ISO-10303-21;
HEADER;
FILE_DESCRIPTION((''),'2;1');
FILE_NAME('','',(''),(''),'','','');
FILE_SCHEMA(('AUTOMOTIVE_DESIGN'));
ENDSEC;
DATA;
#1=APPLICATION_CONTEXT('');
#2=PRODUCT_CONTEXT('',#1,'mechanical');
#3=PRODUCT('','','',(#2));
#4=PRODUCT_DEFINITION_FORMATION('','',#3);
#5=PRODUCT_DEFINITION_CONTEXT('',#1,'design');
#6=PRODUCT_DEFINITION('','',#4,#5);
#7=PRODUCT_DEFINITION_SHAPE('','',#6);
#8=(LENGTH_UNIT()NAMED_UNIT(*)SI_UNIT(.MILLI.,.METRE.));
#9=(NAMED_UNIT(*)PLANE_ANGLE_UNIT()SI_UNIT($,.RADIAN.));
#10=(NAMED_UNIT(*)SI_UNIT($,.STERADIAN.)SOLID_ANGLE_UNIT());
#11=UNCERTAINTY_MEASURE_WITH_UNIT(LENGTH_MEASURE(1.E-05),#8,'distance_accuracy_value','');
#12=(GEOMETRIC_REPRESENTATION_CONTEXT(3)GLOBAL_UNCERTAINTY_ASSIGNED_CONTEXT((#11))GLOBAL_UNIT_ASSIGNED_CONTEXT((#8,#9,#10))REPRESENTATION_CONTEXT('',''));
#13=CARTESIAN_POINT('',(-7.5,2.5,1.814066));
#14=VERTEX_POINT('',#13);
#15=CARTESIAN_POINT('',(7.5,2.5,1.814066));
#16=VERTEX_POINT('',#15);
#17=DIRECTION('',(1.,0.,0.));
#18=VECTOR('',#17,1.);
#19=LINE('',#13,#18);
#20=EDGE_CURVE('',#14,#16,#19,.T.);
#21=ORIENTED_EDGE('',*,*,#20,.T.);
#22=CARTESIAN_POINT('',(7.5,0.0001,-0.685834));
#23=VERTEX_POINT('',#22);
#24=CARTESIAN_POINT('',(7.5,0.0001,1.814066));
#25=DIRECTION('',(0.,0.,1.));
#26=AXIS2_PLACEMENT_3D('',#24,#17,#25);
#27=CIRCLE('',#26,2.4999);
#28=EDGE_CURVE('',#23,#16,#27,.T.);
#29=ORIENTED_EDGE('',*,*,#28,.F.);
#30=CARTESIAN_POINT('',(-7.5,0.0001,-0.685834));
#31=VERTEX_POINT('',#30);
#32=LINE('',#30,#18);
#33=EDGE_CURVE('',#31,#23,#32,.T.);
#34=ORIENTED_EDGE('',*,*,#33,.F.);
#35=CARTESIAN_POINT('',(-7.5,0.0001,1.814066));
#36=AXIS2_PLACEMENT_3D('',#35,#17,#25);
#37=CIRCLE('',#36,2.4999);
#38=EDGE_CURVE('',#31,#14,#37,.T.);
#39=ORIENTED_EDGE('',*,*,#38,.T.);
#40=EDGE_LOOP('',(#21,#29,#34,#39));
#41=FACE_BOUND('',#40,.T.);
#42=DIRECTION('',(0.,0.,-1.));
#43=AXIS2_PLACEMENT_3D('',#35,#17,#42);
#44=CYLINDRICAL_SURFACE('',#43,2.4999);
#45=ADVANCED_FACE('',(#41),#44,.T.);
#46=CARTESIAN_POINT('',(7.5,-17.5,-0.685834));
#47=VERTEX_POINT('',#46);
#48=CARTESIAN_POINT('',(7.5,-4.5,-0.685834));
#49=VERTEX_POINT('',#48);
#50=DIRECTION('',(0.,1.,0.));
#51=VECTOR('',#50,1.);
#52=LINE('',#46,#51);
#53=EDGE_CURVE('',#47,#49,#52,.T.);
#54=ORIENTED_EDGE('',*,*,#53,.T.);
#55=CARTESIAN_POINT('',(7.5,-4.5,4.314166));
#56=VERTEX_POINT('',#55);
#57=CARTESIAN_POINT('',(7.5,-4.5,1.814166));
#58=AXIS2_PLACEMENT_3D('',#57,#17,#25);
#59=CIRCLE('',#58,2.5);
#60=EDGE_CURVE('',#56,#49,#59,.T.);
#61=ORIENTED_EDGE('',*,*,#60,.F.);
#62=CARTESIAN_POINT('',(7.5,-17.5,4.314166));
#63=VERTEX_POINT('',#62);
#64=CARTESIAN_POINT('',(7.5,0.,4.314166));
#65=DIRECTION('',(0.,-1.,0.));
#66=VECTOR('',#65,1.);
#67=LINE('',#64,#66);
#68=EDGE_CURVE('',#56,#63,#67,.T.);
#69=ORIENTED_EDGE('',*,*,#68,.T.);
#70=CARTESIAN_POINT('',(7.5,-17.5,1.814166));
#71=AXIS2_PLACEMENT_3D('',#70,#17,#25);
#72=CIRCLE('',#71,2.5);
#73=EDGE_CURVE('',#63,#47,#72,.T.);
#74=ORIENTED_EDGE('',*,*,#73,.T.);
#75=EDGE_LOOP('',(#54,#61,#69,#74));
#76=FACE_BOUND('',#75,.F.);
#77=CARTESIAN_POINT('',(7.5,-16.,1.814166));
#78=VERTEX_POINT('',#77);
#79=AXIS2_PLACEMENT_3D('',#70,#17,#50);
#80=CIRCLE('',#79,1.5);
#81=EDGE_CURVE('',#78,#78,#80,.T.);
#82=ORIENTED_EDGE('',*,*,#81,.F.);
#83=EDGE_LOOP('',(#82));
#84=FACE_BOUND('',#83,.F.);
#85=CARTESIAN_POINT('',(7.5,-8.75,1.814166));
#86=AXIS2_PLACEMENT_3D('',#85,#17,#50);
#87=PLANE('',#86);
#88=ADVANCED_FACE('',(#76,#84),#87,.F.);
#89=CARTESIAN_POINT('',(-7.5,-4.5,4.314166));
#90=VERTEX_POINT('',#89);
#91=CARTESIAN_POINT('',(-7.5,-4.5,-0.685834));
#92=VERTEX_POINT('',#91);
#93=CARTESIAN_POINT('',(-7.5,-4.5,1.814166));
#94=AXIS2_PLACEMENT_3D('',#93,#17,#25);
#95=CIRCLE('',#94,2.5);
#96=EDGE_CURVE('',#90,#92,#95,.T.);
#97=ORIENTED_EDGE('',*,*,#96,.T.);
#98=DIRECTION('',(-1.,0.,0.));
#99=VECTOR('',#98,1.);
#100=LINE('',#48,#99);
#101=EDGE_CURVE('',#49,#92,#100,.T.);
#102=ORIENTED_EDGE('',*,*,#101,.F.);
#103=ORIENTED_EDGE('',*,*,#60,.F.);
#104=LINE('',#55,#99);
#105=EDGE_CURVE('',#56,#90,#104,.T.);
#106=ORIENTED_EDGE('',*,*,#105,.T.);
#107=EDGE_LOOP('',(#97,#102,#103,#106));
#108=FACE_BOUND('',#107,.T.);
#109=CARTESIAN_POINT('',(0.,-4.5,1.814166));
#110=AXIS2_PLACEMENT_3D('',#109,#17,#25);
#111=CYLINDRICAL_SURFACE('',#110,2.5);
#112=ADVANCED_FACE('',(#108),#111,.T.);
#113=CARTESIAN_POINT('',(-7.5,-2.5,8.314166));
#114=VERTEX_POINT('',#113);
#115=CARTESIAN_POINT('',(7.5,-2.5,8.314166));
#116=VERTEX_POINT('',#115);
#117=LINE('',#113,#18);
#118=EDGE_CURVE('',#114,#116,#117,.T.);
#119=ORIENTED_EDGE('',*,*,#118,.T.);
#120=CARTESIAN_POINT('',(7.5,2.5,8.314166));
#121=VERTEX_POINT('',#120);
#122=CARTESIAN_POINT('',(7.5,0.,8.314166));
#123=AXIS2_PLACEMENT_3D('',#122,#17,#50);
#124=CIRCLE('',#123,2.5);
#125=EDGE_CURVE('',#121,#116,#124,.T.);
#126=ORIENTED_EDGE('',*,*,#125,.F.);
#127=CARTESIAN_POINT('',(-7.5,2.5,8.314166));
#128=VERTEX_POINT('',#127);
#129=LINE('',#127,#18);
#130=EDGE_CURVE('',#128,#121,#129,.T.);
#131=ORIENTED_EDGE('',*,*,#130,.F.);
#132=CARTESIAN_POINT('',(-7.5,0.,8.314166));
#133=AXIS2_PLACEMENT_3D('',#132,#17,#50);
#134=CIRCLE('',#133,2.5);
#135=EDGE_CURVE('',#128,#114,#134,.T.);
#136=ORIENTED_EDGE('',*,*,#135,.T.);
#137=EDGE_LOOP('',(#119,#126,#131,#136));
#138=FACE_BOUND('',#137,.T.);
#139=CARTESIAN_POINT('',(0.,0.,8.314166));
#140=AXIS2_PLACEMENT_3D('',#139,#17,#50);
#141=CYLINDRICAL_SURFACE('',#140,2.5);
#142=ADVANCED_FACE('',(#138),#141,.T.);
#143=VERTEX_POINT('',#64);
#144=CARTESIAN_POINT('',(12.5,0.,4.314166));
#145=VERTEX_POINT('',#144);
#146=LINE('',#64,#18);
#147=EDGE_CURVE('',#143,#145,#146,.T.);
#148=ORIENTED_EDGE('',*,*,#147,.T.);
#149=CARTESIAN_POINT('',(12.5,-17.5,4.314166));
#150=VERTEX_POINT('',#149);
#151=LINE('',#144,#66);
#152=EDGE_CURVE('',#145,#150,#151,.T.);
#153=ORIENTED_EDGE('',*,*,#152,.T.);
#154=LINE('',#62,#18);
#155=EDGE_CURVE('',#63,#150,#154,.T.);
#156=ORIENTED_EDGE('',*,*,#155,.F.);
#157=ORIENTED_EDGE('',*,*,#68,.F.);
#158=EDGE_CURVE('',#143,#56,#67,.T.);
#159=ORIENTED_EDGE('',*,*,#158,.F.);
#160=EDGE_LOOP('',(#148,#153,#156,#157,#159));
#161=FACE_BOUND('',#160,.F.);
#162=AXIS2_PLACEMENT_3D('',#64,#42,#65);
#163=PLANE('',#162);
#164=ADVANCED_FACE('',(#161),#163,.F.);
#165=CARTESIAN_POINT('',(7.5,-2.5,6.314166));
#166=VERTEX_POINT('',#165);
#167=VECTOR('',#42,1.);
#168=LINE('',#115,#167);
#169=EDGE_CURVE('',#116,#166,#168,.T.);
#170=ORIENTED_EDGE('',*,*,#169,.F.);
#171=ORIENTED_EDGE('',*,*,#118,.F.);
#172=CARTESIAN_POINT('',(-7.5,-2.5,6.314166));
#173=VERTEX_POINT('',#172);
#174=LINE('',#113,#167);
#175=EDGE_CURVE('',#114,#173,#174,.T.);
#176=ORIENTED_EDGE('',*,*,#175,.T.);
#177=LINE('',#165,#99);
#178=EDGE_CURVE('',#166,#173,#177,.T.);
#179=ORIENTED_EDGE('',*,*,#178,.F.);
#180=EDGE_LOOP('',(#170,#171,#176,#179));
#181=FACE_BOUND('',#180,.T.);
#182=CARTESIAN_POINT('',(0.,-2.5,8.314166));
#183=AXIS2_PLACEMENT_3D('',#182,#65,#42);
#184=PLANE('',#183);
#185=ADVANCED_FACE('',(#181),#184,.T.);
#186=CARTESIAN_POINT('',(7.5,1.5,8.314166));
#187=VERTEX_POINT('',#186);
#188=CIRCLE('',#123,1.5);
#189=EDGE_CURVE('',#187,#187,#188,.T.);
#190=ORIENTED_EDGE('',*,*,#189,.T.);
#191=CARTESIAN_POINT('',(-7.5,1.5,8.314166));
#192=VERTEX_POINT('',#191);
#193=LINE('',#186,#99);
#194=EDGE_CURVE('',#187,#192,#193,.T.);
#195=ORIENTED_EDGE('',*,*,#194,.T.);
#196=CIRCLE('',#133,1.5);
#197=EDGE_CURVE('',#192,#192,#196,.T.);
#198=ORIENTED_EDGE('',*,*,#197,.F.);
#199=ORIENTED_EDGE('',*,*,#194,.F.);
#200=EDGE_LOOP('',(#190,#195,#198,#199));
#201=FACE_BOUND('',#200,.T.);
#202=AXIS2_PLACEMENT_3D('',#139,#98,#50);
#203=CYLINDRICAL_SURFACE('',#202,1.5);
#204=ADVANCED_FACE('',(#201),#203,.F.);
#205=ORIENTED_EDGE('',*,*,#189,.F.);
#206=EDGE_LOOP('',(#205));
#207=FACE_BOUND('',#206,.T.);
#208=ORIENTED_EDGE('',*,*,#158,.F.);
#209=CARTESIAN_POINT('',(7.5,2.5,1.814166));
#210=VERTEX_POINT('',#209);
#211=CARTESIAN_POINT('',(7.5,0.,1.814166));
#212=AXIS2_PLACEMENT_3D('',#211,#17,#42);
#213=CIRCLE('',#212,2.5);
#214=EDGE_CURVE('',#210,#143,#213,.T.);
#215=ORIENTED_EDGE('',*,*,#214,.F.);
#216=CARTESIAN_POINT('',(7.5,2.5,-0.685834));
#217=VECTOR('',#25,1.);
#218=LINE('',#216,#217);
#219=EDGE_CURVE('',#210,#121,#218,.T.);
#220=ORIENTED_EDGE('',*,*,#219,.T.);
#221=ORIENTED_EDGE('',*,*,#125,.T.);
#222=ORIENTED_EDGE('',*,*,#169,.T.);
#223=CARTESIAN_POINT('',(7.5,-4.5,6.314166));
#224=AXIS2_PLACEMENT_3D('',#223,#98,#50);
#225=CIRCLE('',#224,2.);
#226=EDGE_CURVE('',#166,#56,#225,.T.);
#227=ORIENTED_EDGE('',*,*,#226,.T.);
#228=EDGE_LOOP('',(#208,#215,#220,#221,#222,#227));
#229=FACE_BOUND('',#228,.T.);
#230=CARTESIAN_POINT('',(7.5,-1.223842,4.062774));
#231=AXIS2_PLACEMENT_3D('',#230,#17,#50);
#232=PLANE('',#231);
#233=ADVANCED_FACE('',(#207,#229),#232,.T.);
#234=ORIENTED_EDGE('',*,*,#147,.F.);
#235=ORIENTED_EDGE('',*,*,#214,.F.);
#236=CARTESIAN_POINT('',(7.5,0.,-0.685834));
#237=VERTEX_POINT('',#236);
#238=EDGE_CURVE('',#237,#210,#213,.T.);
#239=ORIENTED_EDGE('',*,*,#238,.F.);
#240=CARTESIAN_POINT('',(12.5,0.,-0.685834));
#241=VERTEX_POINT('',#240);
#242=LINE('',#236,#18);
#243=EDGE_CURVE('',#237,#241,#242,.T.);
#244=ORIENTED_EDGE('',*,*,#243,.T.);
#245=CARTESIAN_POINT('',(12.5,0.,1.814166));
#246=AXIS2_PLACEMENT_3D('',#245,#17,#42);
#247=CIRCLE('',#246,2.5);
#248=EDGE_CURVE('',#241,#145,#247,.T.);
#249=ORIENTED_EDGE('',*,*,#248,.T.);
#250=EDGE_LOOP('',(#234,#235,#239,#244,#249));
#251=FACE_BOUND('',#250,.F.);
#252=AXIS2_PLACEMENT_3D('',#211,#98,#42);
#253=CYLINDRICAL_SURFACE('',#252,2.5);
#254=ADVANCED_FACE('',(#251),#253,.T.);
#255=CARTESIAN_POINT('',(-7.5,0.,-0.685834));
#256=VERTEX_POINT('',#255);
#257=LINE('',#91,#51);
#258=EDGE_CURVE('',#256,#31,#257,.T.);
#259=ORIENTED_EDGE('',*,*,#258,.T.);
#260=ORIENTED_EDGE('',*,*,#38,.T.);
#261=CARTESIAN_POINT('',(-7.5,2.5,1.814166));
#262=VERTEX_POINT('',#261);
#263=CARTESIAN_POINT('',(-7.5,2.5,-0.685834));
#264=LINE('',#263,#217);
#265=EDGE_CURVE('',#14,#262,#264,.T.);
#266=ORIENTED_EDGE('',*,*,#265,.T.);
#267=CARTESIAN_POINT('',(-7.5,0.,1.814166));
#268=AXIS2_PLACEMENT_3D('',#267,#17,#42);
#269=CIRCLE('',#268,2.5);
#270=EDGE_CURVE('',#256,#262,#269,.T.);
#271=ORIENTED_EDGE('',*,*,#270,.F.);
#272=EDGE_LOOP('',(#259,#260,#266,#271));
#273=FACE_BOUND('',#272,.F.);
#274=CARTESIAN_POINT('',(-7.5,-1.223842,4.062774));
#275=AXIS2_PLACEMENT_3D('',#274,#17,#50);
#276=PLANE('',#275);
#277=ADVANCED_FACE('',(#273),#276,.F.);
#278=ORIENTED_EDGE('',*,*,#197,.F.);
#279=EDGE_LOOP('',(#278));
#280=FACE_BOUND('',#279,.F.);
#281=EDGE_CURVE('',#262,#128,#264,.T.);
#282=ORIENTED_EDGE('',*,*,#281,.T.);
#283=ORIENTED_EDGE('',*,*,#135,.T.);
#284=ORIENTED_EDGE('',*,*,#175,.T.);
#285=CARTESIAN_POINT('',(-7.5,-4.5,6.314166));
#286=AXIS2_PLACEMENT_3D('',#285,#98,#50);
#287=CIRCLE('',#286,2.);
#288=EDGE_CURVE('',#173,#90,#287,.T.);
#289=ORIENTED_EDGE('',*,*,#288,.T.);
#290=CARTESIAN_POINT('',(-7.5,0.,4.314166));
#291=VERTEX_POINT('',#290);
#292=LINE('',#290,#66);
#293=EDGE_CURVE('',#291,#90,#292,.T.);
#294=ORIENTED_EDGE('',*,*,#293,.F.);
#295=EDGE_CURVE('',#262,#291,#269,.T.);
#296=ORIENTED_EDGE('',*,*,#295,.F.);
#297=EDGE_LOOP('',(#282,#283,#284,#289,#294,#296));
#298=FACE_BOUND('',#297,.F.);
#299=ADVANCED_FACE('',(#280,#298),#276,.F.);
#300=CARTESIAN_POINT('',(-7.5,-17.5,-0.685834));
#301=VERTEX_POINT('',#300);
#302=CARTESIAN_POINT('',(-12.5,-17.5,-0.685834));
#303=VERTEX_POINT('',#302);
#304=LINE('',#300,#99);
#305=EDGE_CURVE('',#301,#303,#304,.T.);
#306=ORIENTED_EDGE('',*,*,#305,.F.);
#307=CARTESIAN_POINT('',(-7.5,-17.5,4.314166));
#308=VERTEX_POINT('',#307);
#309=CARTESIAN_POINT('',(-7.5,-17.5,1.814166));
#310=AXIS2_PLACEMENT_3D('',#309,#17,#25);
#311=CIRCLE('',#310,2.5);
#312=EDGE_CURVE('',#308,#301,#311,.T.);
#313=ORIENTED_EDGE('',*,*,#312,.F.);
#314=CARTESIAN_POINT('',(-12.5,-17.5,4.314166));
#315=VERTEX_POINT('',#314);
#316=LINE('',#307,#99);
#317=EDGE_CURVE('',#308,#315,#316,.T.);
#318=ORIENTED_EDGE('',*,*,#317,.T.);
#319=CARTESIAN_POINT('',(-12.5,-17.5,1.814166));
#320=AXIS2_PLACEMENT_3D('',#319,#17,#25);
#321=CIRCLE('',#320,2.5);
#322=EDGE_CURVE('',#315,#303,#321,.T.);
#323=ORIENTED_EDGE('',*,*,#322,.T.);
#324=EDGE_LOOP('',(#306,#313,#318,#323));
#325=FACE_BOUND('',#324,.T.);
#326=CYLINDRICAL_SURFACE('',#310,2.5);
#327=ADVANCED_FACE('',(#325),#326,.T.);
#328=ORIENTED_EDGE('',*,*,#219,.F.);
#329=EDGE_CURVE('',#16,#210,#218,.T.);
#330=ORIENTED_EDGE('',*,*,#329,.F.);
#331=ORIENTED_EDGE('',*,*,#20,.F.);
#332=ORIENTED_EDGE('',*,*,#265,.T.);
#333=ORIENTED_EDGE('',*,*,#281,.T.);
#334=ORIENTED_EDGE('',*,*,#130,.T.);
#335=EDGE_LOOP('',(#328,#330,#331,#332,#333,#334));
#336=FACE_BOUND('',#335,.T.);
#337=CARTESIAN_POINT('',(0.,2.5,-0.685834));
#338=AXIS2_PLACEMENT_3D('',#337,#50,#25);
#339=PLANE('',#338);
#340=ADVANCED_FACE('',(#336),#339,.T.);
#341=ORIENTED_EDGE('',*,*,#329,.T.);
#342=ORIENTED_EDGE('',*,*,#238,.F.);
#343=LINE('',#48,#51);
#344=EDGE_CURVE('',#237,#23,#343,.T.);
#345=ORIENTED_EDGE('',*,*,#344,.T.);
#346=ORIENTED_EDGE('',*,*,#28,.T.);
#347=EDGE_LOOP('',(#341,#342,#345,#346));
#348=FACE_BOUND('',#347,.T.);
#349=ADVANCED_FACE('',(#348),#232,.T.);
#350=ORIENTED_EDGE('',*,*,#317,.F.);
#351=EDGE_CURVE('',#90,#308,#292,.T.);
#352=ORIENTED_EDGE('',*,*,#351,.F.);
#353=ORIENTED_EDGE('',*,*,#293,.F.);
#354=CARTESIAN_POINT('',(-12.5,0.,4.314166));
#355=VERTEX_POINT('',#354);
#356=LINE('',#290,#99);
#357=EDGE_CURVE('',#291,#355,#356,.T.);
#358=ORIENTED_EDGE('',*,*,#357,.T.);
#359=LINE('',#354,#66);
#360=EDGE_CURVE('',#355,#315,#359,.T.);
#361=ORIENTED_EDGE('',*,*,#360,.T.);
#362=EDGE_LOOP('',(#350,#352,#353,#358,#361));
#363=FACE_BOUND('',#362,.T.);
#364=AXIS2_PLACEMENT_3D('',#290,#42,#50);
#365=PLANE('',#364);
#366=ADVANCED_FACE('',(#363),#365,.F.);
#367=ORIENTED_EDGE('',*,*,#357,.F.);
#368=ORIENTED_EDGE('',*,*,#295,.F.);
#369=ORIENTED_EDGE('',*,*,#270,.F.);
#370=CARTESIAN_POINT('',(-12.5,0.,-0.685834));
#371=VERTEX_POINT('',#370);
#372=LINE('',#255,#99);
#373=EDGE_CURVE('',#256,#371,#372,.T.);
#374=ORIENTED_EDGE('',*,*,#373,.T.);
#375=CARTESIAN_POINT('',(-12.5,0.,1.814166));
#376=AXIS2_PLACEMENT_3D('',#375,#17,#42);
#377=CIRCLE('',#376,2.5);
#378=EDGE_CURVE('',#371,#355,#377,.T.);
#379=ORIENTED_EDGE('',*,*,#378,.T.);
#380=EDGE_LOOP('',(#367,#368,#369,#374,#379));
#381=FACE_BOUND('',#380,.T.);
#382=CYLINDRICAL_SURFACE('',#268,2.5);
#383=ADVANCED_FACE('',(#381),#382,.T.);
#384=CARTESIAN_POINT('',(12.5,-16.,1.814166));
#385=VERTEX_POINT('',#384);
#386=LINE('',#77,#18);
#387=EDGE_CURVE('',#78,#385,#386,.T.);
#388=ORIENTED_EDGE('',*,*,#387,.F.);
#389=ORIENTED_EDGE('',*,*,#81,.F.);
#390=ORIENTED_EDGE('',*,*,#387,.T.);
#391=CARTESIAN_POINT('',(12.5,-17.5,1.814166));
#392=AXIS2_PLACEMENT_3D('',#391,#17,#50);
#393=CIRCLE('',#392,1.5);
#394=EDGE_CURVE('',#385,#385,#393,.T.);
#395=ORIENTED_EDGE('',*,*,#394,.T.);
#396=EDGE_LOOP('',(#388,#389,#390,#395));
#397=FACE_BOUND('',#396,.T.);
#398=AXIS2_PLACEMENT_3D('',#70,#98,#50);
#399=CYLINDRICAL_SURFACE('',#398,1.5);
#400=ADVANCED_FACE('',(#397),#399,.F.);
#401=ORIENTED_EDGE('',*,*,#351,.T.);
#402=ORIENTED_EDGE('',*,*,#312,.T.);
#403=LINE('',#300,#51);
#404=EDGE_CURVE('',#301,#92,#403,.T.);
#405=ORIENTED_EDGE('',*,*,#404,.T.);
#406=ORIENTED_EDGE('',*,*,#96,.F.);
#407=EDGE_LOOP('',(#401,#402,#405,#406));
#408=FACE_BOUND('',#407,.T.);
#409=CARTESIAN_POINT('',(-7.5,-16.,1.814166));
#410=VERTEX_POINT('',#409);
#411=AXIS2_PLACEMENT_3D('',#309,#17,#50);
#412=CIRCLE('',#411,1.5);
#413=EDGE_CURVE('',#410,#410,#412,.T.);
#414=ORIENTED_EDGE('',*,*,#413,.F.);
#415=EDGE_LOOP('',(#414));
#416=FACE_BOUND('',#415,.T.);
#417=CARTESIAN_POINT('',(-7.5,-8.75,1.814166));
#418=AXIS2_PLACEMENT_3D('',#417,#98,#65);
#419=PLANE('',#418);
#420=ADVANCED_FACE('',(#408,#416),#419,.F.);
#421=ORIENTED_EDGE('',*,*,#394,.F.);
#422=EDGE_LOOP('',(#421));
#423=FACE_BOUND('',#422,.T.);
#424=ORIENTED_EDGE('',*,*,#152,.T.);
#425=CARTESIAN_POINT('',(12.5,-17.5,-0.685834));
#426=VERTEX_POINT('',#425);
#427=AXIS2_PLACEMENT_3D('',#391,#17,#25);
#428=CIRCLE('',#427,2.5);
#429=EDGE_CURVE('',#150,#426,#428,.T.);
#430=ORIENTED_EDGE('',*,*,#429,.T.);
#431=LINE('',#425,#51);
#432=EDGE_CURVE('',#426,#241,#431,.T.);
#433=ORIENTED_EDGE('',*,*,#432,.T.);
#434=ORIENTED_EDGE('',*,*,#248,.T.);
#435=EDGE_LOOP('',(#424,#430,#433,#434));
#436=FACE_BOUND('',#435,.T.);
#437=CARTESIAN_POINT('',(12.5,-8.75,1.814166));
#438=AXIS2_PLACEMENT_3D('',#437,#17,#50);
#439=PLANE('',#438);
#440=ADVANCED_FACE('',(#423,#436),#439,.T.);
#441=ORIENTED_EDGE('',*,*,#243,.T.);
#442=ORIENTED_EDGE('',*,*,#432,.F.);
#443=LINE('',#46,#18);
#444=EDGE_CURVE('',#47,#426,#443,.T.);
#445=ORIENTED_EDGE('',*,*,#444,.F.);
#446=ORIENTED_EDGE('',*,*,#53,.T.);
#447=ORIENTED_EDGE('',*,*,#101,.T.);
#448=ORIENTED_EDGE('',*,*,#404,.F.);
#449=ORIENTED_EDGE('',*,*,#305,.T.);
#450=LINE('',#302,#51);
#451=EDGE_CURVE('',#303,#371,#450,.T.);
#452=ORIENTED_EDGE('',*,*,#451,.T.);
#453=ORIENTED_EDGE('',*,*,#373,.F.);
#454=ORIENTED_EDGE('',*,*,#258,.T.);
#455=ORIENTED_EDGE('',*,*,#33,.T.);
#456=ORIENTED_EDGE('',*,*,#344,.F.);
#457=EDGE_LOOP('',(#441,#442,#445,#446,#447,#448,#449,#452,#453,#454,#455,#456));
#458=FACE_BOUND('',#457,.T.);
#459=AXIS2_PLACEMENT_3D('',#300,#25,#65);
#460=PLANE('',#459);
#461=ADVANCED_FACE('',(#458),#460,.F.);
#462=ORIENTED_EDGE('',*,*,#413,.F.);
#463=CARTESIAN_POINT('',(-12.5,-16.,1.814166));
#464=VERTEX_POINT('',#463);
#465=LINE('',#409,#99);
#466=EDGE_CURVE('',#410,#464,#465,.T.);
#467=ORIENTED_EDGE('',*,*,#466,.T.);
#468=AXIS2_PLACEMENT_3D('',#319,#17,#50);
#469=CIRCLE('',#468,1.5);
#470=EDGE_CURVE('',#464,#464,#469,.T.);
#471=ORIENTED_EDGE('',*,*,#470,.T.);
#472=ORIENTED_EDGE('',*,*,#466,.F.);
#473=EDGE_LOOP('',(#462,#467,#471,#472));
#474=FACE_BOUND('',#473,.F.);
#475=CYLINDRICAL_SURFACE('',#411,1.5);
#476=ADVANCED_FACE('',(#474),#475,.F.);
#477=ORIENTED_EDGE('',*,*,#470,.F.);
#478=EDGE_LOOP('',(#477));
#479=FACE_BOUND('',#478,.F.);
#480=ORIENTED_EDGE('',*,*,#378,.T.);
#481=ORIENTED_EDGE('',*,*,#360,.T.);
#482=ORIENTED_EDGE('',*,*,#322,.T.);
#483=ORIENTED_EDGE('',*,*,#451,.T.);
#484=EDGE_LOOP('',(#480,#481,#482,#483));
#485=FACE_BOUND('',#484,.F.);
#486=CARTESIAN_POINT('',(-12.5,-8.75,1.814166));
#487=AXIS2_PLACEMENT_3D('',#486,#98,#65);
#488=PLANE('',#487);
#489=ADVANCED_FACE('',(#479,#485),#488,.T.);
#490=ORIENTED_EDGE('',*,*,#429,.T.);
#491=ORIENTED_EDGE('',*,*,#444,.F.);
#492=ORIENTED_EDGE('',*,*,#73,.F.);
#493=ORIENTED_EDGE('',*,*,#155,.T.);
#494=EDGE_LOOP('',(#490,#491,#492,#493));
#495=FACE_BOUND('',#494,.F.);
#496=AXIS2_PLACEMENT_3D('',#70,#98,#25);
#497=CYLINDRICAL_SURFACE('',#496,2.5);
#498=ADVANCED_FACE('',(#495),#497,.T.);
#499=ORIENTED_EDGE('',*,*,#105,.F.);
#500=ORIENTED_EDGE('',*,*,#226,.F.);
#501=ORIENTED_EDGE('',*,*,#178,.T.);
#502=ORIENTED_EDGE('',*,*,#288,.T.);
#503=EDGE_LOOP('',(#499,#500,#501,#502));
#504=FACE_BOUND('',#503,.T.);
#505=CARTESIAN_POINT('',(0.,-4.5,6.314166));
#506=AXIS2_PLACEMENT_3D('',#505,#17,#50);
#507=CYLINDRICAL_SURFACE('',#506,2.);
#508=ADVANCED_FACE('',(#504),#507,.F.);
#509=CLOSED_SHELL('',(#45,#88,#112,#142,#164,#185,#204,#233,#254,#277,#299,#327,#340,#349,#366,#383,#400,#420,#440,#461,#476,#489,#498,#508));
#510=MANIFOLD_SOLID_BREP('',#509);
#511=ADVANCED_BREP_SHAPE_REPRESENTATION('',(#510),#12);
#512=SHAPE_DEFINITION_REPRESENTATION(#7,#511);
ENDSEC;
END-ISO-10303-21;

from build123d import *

# Parameters (mm, degrees)
F0_R     = 1.5
F1_DEPTH = 7.5
F2_R     = 1.5
F3_DEPTH = 5
F4_R     = 2.4999


# Not quite as in the source:
# - a fillet or chamfer is up to 0.001 mm smaller than in the source, because OpenCascade refuses the exact size
# - a pattern or mirror of a feature is missing from the dataset's text; its kind, count and spacing are read off the source's solid


with BuildPart() as f1:
    # F0 (on Right) → F1 (new body, symmetric)
    with BuildSketch(Plane.YZ):
        with BuildLine():
            Line((-4.5, -0.685833849), (-2.5, -0.685833849))
            Line((-2.5, -0.685833849), (2.5, -0.685833849))
            Line((2.5, -0.685833849), (2.5, 8.314166151))
            ThreePointArc((2.5, 8.314166151), (0, 10.814166151), (-2.5, 8.314166151))
            Line((-2.5, 8.314166151), (-2.5, 6.314166151))
            ThreePointArc((-2.5, 6.314166151), (-3.0857864376, 4.8999525886), (-4.5, 4.314166151))
            ThreePointArc((-4.5, 4.314166151), (-7, 1.814166151), (-4.5, -0.685833849))
        make_face()
        with Locations((0, 8.314166151)):
            Circle(F0_R, mode=Mode.SUBTRACT)
    extrude(amount=F1_DEPTH, both=True)

    # F2 (on face) → F3 (join)
    with BuildSketch(Plane.YZ.offset(7.5)):
        with BuildLine():
            Line((-17.5, -0.685833849), (0, -0.685833849))
            ThreePointArc((0, -0.685833849), (2.5, 1.814166151), (0, 4.314166151))
            Line((0, 4.314166151), (-17.5, 4.314166151))
            ThreePointArc((-17.5, 4.314166151), (-20, 1.814166151), (-17.5, -0.685833849))
        make_face()
        with Locations((-17.5, 1.814166151)):
            Circle(F2_R, mode=Mode.SUBTRACT)
    f3 = extrude(amount=F3_DEPTH)

    # F3_copies: F3 across plane
    add(f3.mirror(Plane(origin=(0, 0, 0), x_dir=(0, 0, -1), z_dir=(-1, 0, 0))))

    # F4 (radius 2.5 in the source; OpenCascade refuses exactly that, so slightly less here)
    f4_edges = [f1.edges().sort_by_distance(p)[0] for p in [
        (0, 2.5, -0.685834),
    ]]
    fillet(f4_edges, radius=F4_R)


solid = f1.part
